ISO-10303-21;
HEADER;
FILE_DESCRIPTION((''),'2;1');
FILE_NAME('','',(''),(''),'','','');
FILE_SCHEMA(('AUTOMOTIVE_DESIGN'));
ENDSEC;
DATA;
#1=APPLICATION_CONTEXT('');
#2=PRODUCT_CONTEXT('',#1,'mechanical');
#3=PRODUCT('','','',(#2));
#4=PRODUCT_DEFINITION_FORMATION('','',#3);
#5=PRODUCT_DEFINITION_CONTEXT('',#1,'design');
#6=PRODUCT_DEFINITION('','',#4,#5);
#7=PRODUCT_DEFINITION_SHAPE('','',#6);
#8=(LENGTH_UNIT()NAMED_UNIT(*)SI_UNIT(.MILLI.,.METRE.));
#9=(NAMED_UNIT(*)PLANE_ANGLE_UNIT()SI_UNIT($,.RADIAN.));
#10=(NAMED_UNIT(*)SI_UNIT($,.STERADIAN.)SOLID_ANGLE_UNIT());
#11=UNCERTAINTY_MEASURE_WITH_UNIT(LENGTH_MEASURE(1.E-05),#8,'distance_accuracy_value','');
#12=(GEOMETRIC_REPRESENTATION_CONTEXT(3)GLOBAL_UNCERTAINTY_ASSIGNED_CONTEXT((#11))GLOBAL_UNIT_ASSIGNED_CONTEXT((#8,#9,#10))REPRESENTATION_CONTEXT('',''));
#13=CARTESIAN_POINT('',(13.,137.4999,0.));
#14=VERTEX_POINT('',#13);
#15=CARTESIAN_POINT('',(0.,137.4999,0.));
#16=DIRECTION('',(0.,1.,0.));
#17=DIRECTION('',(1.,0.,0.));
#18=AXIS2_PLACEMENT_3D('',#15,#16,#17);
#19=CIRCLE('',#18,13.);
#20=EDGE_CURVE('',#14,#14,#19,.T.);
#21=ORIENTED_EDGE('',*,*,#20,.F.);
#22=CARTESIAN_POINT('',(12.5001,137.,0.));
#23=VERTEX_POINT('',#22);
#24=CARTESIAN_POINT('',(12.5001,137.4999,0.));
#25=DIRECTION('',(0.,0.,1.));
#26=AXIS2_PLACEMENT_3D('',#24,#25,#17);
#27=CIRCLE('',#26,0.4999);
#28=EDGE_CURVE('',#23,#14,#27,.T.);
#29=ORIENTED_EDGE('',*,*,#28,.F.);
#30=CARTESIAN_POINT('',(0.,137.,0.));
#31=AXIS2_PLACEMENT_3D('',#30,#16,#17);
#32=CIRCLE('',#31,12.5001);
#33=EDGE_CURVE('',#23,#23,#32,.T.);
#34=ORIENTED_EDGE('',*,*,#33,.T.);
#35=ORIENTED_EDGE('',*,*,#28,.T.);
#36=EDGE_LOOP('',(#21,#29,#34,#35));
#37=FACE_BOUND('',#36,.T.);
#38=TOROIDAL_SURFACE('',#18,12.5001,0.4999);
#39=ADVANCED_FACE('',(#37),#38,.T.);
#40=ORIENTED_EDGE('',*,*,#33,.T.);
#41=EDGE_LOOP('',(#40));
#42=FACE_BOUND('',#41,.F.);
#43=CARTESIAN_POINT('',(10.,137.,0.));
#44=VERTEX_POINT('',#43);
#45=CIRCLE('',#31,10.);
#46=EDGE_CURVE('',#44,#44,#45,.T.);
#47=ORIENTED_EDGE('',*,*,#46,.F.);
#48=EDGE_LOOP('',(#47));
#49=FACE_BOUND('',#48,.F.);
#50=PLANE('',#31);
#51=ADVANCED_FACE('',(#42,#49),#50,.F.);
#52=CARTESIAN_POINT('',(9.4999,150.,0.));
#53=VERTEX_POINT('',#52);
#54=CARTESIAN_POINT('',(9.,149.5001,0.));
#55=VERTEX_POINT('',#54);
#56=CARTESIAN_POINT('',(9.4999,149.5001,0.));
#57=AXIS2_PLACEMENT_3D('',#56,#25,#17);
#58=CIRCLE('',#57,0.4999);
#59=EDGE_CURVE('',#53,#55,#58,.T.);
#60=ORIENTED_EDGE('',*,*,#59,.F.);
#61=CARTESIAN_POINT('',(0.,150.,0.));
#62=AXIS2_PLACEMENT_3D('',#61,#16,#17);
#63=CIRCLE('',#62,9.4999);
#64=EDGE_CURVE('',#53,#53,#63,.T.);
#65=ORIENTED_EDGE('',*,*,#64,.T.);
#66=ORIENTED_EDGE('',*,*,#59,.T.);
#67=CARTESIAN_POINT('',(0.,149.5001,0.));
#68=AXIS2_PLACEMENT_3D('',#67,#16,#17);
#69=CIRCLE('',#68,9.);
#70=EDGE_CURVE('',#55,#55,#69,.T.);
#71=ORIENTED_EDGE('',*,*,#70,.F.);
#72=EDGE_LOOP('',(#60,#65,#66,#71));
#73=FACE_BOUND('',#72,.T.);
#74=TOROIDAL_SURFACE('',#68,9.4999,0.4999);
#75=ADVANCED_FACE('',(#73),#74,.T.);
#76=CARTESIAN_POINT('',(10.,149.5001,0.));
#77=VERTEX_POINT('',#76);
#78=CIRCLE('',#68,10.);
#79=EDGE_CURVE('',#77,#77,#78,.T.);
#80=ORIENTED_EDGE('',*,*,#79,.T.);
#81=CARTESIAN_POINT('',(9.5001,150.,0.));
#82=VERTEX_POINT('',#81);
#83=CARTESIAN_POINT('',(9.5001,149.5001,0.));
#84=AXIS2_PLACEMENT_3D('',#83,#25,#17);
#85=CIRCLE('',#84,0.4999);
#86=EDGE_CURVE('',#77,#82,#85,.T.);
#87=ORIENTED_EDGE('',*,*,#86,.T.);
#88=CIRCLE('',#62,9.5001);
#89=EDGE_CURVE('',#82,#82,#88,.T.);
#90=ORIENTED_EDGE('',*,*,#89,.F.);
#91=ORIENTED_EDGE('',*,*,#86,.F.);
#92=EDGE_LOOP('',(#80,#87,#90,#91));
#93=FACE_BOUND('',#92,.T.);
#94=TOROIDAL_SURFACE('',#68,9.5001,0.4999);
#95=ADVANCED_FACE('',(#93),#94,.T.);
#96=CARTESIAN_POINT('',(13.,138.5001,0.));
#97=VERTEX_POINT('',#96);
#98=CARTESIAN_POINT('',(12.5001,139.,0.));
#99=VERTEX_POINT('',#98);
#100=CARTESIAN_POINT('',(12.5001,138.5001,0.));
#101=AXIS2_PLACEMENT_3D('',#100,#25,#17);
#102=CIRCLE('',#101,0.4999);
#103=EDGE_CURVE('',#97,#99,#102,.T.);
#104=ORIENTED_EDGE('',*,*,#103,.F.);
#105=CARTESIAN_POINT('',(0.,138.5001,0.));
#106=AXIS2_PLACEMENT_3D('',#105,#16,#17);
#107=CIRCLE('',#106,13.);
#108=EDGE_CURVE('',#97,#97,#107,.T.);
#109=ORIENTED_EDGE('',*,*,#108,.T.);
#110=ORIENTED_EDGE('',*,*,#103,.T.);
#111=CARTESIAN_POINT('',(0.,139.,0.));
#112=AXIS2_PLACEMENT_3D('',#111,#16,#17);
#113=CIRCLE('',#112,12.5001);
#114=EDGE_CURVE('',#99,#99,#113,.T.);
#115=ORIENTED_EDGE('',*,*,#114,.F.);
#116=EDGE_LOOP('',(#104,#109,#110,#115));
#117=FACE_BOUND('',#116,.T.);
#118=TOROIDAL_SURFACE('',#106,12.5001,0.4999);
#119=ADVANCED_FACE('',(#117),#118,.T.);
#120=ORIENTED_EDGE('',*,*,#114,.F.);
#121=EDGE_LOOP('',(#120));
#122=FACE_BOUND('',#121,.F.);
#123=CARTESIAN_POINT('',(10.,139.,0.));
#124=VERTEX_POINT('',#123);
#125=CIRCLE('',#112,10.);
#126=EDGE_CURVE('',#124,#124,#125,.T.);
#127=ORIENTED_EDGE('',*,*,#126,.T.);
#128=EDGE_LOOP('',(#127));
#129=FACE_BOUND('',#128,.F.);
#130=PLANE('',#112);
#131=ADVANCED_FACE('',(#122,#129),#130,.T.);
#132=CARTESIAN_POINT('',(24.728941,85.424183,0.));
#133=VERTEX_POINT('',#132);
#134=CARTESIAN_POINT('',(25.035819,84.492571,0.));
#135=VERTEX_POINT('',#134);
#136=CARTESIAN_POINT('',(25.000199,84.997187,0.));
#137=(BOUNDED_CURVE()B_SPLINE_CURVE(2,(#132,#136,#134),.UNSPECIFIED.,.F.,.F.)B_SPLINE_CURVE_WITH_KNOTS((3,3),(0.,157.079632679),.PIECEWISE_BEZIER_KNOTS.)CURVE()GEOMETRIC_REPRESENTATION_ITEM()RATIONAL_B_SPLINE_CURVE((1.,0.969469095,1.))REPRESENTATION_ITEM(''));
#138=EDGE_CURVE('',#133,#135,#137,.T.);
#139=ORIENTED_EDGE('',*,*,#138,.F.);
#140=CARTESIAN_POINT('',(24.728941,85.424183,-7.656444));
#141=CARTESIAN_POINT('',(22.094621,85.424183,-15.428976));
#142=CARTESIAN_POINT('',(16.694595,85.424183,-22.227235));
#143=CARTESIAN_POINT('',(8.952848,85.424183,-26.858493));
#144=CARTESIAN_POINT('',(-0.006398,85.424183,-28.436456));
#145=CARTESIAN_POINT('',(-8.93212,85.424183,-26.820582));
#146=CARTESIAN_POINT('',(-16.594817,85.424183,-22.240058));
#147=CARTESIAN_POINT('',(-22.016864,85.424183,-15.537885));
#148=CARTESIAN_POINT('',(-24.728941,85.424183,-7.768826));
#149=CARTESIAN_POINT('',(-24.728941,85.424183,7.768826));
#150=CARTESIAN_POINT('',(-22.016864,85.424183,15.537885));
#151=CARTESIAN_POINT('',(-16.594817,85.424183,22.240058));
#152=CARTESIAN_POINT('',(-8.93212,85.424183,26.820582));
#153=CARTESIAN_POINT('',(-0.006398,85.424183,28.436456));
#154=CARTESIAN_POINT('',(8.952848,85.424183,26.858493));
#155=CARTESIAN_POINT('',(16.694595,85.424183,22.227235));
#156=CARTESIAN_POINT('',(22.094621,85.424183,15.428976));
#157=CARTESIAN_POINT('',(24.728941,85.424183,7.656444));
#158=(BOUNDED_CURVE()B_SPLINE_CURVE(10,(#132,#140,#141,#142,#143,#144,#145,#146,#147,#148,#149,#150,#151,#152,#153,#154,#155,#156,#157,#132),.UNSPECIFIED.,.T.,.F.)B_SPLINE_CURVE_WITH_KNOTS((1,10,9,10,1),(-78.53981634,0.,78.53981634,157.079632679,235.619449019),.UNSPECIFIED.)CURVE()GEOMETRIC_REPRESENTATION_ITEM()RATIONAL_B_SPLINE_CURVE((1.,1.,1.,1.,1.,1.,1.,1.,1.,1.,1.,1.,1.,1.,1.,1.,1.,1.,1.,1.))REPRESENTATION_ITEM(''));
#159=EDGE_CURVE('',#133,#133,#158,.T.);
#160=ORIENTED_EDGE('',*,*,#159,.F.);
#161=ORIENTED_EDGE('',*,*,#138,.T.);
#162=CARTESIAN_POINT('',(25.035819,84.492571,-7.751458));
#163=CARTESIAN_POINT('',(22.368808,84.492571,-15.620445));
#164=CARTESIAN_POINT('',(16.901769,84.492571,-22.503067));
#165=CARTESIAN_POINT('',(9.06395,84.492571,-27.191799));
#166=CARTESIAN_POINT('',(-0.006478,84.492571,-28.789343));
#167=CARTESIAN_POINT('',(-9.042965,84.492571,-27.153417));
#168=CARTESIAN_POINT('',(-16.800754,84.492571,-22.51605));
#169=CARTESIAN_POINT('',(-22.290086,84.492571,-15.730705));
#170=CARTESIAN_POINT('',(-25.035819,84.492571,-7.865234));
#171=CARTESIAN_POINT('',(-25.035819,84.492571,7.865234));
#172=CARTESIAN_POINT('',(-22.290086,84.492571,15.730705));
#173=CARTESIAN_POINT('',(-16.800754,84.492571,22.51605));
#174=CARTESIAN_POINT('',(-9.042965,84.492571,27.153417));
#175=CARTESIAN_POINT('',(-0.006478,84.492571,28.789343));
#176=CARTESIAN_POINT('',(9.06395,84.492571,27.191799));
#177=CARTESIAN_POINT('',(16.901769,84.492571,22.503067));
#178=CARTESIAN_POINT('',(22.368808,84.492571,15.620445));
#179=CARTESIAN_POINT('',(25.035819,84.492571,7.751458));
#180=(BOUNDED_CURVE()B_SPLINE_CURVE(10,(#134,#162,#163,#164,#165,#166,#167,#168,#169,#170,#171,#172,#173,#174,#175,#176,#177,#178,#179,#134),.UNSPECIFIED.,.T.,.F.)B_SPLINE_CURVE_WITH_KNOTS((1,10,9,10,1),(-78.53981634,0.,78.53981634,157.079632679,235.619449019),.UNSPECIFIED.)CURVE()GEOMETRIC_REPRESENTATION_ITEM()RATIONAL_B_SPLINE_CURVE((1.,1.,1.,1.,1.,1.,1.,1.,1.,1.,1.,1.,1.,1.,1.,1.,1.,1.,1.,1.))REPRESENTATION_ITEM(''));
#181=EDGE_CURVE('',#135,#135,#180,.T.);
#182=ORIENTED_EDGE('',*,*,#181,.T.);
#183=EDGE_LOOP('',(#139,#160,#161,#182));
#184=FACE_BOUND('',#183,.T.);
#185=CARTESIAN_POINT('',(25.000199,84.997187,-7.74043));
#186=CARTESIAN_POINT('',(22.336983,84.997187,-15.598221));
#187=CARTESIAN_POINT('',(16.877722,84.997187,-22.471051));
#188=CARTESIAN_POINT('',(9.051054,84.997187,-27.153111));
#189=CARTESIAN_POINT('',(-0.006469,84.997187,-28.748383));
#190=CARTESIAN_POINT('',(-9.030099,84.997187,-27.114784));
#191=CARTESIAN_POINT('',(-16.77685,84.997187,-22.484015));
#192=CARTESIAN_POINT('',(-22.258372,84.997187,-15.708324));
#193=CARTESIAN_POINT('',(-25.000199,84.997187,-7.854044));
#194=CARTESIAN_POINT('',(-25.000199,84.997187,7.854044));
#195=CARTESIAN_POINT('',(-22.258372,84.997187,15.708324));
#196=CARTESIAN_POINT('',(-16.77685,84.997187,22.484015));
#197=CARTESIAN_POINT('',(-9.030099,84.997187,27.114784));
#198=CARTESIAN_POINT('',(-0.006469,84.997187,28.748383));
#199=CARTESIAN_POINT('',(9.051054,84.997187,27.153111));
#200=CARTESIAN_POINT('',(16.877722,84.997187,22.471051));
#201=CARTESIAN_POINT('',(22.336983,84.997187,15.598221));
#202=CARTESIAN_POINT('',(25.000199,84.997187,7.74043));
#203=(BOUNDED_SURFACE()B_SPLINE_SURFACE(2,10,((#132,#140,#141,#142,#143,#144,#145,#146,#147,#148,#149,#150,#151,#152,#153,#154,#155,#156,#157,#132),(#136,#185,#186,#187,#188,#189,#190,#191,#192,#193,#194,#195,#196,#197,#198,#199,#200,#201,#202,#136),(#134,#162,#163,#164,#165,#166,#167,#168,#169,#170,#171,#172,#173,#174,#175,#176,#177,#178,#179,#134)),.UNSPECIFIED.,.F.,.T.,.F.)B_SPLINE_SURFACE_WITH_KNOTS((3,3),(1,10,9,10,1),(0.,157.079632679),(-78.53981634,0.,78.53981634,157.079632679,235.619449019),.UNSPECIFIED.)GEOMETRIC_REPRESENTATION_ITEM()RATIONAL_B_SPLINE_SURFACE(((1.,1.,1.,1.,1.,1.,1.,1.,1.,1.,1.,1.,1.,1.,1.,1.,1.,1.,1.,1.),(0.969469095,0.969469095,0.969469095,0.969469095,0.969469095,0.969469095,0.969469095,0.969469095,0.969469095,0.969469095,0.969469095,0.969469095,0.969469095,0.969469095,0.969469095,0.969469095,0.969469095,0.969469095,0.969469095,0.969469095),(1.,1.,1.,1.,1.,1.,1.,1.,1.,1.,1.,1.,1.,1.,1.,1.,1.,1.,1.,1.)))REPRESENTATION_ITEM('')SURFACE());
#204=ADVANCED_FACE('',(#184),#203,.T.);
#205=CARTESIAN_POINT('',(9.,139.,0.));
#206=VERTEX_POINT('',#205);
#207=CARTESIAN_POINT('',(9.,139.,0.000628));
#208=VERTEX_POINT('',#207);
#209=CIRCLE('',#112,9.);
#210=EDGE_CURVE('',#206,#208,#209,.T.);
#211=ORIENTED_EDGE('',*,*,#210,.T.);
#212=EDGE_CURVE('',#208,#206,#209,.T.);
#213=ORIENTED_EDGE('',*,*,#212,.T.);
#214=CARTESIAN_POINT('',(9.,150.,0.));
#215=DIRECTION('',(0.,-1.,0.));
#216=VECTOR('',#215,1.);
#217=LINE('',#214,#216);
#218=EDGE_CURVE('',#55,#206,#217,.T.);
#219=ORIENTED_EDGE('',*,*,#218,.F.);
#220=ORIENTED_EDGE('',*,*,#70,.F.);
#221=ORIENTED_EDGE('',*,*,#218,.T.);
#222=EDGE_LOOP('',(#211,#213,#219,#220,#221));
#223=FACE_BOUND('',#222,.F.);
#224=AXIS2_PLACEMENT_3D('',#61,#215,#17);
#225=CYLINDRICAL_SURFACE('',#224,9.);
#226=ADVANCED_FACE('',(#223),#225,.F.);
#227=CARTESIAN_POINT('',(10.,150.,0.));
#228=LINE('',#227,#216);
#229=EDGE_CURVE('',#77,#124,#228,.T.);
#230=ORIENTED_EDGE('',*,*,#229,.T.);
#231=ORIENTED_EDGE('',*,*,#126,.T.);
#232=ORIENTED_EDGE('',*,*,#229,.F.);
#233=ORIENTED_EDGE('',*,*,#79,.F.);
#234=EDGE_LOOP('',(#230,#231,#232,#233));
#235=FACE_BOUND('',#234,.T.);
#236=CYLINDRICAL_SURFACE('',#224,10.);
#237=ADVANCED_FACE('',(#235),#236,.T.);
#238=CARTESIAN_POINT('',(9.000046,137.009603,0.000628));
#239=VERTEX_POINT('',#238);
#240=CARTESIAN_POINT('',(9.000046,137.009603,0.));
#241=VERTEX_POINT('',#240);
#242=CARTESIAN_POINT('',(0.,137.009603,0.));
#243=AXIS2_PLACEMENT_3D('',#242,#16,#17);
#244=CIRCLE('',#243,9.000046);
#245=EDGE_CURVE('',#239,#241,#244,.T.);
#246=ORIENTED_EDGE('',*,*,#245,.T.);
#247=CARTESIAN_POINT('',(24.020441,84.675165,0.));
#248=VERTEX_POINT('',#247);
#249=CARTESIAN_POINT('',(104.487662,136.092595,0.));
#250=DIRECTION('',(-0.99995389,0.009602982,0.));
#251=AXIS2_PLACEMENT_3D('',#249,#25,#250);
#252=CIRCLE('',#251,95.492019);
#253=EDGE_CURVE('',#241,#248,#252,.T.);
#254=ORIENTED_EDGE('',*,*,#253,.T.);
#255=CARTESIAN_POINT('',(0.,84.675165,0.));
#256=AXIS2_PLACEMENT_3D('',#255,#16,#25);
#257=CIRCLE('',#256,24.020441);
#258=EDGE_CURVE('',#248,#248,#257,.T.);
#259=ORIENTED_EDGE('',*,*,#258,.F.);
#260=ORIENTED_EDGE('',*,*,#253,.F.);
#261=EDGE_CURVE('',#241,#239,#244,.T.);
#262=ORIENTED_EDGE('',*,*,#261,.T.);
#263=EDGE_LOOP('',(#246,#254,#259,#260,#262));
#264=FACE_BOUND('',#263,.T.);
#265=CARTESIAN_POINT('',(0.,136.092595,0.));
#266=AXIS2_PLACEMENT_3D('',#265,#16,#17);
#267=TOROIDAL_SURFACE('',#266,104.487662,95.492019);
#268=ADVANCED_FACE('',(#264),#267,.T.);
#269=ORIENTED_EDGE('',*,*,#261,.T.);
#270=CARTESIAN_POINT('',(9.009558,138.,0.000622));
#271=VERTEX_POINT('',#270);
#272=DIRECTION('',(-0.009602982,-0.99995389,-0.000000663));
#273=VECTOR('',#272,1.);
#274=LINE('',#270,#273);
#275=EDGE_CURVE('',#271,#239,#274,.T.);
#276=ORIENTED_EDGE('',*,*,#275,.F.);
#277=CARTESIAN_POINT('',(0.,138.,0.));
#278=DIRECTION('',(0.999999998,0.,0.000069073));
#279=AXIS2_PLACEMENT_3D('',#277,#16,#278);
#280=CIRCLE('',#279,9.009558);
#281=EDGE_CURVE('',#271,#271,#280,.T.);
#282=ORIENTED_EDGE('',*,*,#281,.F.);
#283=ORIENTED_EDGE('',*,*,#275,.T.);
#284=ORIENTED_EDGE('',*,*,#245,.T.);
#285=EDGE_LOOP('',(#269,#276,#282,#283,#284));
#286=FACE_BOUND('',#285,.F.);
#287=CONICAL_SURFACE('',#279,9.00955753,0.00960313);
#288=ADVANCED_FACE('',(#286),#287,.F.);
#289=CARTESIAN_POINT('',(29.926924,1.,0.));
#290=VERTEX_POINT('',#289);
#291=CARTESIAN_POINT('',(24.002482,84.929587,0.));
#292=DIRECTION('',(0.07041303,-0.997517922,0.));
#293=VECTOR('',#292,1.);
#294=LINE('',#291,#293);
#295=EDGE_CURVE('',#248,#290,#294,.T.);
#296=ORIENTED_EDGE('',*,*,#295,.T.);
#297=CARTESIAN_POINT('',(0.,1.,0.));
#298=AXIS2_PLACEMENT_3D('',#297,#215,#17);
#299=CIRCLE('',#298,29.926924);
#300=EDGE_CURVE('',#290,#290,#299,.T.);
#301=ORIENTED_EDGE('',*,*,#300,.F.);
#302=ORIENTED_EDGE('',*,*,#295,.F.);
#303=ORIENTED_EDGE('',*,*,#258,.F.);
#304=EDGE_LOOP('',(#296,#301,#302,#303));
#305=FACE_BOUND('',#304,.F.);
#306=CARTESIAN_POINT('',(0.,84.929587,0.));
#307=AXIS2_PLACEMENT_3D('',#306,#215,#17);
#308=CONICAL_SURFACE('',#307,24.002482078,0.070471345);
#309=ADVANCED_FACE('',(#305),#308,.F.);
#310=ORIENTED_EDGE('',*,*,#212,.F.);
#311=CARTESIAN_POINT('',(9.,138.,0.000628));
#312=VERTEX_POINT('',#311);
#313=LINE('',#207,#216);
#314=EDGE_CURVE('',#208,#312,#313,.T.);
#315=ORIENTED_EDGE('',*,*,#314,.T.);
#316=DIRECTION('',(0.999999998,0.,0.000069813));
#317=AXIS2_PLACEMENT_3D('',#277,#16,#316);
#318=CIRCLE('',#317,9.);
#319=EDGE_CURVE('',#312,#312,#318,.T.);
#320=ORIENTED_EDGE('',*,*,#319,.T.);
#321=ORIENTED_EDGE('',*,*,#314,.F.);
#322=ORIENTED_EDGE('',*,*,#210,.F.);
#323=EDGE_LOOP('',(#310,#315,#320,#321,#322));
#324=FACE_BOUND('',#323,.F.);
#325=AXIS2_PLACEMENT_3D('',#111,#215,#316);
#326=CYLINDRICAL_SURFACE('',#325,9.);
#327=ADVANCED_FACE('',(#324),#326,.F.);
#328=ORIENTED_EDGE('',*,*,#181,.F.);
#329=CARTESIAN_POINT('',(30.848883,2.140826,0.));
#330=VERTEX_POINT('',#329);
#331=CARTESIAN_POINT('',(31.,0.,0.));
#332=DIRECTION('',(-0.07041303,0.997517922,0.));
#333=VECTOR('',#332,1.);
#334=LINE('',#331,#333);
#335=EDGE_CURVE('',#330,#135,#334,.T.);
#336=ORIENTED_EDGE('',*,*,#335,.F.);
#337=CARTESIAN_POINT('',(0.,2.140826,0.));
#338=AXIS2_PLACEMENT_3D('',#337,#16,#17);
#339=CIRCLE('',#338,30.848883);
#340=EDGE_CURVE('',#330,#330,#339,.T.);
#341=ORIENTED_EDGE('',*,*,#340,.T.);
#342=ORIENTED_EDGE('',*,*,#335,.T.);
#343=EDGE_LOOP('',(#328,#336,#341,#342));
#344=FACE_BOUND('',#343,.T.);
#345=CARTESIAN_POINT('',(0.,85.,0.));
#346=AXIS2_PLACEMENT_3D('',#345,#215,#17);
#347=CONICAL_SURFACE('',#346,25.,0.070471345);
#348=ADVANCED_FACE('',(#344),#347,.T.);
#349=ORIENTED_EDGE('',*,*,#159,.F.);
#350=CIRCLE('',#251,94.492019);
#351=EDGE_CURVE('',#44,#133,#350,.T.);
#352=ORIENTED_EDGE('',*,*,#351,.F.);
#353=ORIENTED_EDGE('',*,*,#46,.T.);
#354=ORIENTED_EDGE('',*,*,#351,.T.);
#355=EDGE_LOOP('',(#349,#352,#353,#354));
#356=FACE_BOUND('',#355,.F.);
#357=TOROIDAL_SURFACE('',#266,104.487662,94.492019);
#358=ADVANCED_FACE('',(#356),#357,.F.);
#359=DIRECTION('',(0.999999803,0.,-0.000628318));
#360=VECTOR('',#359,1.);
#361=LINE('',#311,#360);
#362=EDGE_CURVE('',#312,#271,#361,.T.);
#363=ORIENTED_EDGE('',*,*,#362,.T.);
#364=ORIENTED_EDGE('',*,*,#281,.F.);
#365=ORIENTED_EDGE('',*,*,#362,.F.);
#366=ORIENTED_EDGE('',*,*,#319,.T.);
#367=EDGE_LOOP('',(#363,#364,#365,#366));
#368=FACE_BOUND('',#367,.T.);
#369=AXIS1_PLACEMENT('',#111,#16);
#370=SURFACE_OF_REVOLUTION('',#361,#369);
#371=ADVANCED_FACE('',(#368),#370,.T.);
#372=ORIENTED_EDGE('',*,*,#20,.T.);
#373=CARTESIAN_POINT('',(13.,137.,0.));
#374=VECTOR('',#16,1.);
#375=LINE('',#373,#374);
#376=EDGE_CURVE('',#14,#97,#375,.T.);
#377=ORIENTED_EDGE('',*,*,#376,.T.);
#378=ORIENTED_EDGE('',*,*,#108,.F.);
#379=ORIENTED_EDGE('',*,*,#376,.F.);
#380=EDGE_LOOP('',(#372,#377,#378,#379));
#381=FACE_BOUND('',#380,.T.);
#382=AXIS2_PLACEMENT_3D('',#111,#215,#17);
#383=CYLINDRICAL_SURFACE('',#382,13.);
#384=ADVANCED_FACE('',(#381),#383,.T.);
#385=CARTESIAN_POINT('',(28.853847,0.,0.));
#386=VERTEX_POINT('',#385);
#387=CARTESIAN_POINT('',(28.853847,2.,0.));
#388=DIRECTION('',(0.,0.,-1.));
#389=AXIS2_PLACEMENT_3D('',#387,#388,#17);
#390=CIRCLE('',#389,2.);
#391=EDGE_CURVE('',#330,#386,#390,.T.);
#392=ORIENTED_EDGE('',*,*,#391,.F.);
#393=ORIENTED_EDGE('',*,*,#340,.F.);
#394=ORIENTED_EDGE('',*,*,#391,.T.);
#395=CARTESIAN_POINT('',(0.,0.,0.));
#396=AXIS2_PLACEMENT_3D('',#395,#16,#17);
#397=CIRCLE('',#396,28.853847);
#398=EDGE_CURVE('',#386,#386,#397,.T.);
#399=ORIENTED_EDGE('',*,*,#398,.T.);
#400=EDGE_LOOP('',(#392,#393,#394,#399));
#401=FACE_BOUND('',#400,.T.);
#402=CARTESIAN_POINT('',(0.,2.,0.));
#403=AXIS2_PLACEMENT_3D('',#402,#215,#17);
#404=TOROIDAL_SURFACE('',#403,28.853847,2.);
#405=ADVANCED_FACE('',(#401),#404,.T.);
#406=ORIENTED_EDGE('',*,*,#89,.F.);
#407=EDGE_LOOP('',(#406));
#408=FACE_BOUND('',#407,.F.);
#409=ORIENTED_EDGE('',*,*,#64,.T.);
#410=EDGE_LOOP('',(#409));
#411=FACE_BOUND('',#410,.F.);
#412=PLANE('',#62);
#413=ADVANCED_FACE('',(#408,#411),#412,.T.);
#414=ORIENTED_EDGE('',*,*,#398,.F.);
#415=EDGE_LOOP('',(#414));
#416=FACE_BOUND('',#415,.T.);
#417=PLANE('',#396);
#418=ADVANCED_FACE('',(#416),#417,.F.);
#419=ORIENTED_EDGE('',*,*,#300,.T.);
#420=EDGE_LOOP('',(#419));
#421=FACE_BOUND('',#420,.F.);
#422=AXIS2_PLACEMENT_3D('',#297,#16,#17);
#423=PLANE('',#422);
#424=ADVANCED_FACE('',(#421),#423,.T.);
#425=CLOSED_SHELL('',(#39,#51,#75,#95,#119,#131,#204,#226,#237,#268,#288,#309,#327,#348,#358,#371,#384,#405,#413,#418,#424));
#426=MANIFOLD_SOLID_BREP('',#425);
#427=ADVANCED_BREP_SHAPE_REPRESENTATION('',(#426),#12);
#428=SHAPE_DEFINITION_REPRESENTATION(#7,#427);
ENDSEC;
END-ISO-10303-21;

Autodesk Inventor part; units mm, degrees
ref_plane "YZ Plane" through (0, 0, 0) normal (1, 0, 0) x (0, 1, 0)
ref_plane "XZ Plane" through (0, 0, 0) normal (0, 1, 0) x (-1, 0, 0)
ref_plane "XY Plane" through (0, 0, 0) normal (0, 0, 1) x (1, 0, 0)
sketch "Sketch1" plane through (0, 0, 0) normal (0, 0, 1) x (1, 0, 0)
  line L0 (0, 0) -> (0, 150)
  line L1 (0, 0) -> (31, 0)
  line L2 (0, 150) -> (10, 150)
  line L3 (10, 150) -> (10, 139)
  line L4 (10, 139) -> (13, 139)
  line L5 (13, 139) -> (13, 137)
  line L6 (13, 137) -> (10, 137)
  arc A0 (10, 137) -> (25, 85) centre (104.4877, 136.0926) ccw
  line L7 (25, 85) -> (31, 0)
revolve "Revolution1" add sketch "Sketch1" angle 360 about axis through (0, 0, 0) along (0, 1, 0)
shell "Shell1" thickness 1 removed faces 1 at (-1.6385, 150, 0.6428)
fillet "Fillet1" radius 2 1 edges at (-25, 85, 0)
fillet "Fillet2" radius 2 1 edges at (-31, 0, 0)
fillet "Fillet3" radius 0.5 4 edges at (-10, 150, 0) (-9, 150, 0) (-13, 139, 0) (-13, 137, 0)
thread "Thread1" size "M20x2.5" class "6g" standard "ANSI Metric M Profile" full length
sketch "Sketch2" plane through (0, 139, 0) normal (0, 1, 0) x (1, 0, 0)
  point P0 (0, 0)
sketch "Sketch3" plane through (0, 1, 0) normal (0, 1, 0) x (1, 0, 0)
  point P0 (0, 0)
properties part number "flaska"
